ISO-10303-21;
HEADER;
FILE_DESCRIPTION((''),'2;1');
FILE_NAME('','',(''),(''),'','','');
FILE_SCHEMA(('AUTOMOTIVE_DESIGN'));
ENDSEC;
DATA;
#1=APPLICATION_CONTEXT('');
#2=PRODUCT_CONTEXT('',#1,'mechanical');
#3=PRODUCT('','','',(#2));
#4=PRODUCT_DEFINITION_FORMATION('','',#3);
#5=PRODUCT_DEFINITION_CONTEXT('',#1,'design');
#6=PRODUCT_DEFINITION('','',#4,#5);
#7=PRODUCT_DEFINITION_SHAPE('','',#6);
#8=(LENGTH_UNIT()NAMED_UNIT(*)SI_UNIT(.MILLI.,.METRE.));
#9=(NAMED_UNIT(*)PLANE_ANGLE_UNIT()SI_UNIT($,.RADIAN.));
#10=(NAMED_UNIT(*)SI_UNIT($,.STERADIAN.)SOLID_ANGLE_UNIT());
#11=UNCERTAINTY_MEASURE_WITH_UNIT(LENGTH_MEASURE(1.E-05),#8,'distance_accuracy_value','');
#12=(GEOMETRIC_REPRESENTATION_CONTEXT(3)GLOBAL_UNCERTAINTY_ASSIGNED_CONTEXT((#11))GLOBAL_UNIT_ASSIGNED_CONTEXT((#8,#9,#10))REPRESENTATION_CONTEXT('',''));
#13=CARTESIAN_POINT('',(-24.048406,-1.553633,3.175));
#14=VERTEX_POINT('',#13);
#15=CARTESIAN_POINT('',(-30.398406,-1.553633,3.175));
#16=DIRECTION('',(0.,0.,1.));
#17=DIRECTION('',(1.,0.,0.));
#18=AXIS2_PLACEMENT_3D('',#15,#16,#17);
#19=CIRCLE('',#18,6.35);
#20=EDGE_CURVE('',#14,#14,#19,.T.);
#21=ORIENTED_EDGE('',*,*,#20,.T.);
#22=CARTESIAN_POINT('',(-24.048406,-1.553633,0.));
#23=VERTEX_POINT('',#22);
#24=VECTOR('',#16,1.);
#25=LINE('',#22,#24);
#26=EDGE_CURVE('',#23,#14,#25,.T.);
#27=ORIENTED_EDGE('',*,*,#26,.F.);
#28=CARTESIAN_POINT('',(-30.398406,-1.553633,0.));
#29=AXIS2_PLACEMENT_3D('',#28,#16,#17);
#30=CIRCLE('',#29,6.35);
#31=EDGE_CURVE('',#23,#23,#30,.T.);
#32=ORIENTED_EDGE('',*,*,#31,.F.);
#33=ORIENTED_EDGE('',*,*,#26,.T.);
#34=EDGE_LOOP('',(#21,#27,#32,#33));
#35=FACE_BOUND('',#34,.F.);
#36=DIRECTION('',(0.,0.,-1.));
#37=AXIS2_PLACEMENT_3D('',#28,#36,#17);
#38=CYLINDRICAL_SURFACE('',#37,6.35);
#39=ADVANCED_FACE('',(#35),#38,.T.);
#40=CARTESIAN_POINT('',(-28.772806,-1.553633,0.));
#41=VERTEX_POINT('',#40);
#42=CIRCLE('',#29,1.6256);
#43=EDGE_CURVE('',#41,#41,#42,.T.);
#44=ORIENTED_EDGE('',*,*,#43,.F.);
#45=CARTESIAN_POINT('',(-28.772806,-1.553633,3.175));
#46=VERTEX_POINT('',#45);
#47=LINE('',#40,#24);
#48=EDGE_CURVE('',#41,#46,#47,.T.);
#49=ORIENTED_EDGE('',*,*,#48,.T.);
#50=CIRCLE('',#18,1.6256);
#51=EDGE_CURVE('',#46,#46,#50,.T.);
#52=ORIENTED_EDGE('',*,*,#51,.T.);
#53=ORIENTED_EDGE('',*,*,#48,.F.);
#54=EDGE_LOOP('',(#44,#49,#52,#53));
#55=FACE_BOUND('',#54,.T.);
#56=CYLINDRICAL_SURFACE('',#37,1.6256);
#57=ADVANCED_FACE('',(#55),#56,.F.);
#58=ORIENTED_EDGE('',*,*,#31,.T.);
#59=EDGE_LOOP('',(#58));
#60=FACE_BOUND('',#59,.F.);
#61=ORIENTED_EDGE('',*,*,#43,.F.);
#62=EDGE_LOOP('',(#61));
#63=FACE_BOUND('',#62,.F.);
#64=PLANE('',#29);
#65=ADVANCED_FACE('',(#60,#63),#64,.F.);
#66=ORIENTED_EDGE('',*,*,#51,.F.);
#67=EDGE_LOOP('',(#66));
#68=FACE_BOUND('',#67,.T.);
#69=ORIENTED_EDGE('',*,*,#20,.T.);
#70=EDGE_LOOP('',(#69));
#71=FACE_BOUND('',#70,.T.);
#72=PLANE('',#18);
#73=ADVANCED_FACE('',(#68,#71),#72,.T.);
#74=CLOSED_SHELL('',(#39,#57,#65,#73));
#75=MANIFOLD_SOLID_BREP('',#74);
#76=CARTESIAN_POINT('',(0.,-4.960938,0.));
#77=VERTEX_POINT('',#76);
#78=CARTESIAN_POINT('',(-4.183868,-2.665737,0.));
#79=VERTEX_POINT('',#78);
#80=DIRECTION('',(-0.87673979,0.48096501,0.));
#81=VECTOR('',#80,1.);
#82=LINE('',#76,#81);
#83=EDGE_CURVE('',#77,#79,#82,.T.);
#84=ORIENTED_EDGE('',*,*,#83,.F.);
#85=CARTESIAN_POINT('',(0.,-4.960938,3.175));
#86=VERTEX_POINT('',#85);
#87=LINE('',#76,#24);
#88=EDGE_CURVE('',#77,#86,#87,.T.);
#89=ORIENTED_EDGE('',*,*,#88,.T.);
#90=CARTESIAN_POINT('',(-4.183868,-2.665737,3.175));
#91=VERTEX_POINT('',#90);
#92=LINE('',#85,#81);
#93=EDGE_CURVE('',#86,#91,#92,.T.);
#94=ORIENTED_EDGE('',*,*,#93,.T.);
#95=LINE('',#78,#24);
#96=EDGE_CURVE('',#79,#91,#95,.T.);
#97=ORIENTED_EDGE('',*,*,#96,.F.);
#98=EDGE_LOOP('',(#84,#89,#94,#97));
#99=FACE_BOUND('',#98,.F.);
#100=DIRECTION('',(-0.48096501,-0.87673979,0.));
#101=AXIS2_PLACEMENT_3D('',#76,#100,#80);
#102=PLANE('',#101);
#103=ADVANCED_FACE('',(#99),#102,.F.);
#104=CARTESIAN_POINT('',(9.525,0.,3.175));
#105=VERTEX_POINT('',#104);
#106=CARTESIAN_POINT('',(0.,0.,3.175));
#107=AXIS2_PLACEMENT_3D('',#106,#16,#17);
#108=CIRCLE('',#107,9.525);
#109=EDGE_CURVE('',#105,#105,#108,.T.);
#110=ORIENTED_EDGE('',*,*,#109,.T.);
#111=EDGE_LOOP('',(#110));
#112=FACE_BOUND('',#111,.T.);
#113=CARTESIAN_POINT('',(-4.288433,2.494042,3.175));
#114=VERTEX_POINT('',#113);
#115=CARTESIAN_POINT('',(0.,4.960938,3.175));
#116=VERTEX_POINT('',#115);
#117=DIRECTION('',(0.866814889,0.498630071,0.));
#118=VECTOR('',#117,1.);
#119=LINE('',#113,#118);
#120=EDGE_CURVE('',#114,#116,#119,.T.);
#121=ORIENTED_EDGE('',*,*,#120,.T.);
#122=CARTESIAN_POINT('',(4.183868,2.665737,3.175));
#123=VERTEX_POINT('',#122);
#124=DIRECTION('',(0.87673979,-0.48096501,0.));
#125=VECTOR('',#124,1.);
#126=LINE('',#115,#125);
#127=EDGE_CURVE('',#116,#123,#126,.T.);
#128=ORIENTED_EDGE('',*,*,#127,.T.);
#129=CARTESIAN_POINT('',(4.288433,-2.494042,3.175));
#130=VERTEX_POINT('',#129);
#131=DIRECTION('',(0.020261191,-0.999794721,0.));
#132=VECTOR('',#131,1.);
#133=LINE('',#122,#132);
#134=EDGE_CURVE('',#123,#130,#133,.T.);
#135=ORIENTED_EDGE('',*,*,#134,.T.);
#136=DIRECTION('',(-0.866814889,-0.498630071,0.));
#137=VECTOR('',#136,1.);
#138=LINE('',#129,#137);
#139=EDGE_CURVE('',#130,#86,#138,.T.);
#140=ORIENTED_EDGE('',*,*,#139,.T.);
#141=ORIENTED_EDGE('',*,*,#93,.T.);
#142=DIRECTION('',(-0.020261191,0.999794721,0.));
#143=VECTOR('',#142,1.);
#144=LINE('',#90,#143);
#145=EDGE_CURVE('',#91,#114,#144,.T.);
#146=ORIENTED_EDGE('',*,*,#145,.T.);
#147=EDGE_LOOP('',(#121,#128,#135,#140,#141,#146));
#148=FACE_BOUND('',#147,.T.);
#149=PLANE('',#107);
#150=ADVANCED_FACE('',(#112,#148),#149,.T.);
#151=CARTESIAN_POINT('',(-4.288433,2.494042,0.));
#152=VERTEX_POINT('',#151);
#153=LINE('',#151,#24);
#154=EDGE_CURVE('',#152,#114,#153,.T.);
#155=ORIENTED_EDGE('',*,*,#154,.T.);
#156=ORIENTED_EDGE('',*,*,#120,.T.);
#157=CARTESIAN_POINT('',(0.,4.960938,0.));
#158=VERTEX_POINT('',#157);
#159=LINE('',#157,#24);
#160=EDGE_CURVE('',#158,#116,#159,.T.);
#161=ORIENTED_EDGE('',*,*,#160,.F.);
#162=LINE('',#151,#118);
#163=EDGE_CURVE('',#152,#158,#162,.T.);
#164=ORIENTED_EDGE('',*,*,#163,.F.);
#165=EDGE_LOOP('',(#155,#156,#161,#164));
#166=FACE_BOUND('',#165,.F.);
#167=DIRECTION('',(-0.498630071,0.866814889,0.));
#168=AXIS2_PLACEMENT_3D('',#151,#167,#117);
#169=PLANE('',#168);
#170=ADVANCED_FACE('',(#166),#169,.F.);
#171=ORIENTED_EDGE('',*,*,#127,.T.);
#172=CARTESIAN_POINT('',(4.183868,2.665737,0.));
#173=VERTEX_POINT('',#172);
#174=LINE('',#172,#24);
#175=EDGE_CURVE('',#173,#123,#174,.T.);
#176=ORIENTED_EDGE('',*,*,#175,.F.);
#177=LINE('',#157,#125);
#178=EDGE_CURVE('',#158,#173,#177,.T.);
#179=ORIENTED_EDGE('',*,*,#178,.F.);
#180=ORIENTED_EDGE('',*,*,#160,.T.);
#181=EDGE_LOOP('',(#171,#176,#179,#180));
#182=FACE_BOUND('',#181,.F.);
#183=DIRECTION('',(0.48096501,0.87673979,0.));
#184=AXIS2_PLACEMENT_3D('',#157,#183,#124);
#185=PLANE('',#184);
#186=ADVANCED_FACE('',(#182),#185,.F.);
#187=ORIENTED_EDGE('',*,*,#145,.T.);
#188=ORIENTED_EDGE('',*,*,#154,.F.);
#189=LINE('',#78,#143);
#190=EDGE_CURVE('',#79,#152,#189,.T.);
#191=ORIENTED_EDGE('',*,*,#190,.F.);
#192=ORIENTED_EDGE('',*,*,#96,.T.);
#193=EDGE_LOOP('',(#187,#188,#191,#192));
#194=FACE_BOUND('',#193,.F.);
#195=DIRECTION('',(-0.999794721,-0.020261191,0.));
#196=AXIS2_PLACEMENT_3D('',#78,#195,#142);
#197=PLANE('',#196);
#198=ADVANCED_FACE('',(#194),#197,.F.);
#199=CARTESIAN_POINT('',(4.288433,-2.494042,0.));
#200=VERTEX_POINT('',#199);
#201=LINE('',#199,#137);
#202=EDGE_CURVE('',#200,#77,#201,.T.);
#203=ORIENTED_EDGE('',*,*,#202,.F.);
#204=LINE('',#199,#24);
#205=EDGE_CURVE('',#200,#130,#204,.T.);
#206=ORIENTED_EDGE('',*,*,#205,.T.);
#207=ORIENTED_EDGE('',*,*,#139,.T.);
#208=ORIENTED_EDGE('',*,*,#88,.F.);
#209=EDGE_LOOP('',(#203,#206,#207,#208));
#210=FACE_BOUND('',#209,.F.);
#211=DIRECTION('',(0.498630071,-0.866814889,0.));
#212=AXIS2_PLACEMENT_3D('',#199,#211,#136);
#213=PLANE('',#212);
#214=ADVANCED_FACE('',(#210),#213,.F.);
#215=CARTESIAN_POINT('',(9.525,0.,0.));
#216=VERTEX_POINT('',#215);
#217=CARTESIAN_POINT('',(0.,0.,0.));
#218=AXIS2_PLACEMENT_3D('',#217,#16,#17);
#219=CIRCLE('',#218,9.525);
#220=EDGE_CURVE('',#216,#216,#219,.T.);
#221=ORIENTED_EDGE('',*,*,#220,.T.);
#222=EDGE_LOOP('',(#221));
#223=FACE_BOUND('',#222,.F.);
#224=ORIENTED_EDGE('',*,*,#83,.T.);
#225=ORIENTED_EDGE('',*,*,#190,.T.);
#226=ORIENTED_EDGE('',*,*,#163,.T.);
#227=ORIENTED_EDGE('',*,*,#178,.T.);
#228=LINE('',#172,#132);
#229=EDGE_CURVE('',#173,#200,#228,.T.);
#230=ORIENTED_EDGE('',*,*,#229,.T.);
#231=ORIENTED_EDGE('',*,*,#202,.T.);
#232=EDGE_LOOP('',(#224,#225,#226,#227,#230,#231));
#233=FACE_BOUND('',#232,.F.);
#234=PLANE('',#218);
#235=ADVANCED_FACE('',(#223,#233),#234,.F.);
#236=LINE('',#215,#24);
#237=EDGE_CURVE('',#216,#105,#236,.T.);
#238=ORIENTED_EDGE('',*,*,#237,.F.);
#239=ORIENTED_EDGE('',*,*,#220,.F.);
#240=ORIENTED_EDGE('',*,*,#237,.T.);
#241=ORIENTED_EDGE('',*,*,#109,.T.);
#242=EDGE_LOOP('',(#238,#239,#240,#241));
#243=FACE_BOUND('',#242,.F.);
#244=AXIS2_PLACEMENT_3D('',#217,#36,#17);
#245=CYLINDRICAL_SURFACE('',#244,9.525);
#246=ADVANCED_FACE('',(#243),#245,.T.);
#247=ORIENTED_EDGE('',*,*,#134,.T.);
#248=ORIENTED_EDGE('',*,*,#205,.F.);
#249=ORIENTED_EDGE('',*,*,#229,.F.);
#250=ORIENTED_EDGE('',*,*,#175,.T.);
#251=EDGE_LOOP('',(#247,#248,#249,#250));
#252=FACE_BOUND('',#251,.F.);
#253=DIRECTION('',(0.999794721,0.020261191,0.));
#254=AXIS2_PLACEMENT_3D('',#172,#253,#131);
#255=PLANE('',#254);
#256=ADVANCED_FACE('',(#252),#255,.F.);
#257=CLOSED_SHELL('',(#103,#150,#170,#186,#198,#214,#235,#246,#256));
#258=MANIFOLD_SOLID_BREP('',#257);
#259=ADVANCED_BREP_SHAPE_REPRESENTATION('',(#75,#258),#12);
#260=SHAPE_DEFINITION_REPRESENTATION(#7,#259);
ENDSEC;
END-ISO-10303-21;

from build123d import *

# Parameters (mm, degrees)
F0_R     = 6.35
F0_R_2   = 1.6256
F1_DEPTH = 3.175
F0_R_3   = 9.525


# Not quite as in the source:
# - a length typed as a fraction of an inch, garbled in the dataset ("3 / 203.2 mm" for 3/8 in), is restored


with BuildPart() as f1:
    # F0 (on Top) → F1 (new body)
    with BuildSketch(Plane.XY):
        with Locations((-30.3984060884, -1.5536330175)):
            Circle(F0_R)
        with Locations((-30.3984060884, -1.5536330175)):
            Circle(F0_R_2, mode=Mode.SUBTRACT)
    extrude(amount=F1_DEPTH)


with BuildPart() as f1b:
    # F0 (on Top) → F1, piece 2 (new body)
    with BuildSketch(Plane.XY):
        Circle(F0_R_3)
        Polygon((-4.1838677777, -2.6657365395), (-4.2884325113, 2.4940423964), (0, 4.9609375), (4.1838677777, 2.6657365395), (4.2884325113, -2.4940423964), (0, -4.9609375), align=None, mode=Mode.SUBTRACT)
    extrude(amount=F1_DEPTH)


solid = Compound([f1.part, f1b.part])
